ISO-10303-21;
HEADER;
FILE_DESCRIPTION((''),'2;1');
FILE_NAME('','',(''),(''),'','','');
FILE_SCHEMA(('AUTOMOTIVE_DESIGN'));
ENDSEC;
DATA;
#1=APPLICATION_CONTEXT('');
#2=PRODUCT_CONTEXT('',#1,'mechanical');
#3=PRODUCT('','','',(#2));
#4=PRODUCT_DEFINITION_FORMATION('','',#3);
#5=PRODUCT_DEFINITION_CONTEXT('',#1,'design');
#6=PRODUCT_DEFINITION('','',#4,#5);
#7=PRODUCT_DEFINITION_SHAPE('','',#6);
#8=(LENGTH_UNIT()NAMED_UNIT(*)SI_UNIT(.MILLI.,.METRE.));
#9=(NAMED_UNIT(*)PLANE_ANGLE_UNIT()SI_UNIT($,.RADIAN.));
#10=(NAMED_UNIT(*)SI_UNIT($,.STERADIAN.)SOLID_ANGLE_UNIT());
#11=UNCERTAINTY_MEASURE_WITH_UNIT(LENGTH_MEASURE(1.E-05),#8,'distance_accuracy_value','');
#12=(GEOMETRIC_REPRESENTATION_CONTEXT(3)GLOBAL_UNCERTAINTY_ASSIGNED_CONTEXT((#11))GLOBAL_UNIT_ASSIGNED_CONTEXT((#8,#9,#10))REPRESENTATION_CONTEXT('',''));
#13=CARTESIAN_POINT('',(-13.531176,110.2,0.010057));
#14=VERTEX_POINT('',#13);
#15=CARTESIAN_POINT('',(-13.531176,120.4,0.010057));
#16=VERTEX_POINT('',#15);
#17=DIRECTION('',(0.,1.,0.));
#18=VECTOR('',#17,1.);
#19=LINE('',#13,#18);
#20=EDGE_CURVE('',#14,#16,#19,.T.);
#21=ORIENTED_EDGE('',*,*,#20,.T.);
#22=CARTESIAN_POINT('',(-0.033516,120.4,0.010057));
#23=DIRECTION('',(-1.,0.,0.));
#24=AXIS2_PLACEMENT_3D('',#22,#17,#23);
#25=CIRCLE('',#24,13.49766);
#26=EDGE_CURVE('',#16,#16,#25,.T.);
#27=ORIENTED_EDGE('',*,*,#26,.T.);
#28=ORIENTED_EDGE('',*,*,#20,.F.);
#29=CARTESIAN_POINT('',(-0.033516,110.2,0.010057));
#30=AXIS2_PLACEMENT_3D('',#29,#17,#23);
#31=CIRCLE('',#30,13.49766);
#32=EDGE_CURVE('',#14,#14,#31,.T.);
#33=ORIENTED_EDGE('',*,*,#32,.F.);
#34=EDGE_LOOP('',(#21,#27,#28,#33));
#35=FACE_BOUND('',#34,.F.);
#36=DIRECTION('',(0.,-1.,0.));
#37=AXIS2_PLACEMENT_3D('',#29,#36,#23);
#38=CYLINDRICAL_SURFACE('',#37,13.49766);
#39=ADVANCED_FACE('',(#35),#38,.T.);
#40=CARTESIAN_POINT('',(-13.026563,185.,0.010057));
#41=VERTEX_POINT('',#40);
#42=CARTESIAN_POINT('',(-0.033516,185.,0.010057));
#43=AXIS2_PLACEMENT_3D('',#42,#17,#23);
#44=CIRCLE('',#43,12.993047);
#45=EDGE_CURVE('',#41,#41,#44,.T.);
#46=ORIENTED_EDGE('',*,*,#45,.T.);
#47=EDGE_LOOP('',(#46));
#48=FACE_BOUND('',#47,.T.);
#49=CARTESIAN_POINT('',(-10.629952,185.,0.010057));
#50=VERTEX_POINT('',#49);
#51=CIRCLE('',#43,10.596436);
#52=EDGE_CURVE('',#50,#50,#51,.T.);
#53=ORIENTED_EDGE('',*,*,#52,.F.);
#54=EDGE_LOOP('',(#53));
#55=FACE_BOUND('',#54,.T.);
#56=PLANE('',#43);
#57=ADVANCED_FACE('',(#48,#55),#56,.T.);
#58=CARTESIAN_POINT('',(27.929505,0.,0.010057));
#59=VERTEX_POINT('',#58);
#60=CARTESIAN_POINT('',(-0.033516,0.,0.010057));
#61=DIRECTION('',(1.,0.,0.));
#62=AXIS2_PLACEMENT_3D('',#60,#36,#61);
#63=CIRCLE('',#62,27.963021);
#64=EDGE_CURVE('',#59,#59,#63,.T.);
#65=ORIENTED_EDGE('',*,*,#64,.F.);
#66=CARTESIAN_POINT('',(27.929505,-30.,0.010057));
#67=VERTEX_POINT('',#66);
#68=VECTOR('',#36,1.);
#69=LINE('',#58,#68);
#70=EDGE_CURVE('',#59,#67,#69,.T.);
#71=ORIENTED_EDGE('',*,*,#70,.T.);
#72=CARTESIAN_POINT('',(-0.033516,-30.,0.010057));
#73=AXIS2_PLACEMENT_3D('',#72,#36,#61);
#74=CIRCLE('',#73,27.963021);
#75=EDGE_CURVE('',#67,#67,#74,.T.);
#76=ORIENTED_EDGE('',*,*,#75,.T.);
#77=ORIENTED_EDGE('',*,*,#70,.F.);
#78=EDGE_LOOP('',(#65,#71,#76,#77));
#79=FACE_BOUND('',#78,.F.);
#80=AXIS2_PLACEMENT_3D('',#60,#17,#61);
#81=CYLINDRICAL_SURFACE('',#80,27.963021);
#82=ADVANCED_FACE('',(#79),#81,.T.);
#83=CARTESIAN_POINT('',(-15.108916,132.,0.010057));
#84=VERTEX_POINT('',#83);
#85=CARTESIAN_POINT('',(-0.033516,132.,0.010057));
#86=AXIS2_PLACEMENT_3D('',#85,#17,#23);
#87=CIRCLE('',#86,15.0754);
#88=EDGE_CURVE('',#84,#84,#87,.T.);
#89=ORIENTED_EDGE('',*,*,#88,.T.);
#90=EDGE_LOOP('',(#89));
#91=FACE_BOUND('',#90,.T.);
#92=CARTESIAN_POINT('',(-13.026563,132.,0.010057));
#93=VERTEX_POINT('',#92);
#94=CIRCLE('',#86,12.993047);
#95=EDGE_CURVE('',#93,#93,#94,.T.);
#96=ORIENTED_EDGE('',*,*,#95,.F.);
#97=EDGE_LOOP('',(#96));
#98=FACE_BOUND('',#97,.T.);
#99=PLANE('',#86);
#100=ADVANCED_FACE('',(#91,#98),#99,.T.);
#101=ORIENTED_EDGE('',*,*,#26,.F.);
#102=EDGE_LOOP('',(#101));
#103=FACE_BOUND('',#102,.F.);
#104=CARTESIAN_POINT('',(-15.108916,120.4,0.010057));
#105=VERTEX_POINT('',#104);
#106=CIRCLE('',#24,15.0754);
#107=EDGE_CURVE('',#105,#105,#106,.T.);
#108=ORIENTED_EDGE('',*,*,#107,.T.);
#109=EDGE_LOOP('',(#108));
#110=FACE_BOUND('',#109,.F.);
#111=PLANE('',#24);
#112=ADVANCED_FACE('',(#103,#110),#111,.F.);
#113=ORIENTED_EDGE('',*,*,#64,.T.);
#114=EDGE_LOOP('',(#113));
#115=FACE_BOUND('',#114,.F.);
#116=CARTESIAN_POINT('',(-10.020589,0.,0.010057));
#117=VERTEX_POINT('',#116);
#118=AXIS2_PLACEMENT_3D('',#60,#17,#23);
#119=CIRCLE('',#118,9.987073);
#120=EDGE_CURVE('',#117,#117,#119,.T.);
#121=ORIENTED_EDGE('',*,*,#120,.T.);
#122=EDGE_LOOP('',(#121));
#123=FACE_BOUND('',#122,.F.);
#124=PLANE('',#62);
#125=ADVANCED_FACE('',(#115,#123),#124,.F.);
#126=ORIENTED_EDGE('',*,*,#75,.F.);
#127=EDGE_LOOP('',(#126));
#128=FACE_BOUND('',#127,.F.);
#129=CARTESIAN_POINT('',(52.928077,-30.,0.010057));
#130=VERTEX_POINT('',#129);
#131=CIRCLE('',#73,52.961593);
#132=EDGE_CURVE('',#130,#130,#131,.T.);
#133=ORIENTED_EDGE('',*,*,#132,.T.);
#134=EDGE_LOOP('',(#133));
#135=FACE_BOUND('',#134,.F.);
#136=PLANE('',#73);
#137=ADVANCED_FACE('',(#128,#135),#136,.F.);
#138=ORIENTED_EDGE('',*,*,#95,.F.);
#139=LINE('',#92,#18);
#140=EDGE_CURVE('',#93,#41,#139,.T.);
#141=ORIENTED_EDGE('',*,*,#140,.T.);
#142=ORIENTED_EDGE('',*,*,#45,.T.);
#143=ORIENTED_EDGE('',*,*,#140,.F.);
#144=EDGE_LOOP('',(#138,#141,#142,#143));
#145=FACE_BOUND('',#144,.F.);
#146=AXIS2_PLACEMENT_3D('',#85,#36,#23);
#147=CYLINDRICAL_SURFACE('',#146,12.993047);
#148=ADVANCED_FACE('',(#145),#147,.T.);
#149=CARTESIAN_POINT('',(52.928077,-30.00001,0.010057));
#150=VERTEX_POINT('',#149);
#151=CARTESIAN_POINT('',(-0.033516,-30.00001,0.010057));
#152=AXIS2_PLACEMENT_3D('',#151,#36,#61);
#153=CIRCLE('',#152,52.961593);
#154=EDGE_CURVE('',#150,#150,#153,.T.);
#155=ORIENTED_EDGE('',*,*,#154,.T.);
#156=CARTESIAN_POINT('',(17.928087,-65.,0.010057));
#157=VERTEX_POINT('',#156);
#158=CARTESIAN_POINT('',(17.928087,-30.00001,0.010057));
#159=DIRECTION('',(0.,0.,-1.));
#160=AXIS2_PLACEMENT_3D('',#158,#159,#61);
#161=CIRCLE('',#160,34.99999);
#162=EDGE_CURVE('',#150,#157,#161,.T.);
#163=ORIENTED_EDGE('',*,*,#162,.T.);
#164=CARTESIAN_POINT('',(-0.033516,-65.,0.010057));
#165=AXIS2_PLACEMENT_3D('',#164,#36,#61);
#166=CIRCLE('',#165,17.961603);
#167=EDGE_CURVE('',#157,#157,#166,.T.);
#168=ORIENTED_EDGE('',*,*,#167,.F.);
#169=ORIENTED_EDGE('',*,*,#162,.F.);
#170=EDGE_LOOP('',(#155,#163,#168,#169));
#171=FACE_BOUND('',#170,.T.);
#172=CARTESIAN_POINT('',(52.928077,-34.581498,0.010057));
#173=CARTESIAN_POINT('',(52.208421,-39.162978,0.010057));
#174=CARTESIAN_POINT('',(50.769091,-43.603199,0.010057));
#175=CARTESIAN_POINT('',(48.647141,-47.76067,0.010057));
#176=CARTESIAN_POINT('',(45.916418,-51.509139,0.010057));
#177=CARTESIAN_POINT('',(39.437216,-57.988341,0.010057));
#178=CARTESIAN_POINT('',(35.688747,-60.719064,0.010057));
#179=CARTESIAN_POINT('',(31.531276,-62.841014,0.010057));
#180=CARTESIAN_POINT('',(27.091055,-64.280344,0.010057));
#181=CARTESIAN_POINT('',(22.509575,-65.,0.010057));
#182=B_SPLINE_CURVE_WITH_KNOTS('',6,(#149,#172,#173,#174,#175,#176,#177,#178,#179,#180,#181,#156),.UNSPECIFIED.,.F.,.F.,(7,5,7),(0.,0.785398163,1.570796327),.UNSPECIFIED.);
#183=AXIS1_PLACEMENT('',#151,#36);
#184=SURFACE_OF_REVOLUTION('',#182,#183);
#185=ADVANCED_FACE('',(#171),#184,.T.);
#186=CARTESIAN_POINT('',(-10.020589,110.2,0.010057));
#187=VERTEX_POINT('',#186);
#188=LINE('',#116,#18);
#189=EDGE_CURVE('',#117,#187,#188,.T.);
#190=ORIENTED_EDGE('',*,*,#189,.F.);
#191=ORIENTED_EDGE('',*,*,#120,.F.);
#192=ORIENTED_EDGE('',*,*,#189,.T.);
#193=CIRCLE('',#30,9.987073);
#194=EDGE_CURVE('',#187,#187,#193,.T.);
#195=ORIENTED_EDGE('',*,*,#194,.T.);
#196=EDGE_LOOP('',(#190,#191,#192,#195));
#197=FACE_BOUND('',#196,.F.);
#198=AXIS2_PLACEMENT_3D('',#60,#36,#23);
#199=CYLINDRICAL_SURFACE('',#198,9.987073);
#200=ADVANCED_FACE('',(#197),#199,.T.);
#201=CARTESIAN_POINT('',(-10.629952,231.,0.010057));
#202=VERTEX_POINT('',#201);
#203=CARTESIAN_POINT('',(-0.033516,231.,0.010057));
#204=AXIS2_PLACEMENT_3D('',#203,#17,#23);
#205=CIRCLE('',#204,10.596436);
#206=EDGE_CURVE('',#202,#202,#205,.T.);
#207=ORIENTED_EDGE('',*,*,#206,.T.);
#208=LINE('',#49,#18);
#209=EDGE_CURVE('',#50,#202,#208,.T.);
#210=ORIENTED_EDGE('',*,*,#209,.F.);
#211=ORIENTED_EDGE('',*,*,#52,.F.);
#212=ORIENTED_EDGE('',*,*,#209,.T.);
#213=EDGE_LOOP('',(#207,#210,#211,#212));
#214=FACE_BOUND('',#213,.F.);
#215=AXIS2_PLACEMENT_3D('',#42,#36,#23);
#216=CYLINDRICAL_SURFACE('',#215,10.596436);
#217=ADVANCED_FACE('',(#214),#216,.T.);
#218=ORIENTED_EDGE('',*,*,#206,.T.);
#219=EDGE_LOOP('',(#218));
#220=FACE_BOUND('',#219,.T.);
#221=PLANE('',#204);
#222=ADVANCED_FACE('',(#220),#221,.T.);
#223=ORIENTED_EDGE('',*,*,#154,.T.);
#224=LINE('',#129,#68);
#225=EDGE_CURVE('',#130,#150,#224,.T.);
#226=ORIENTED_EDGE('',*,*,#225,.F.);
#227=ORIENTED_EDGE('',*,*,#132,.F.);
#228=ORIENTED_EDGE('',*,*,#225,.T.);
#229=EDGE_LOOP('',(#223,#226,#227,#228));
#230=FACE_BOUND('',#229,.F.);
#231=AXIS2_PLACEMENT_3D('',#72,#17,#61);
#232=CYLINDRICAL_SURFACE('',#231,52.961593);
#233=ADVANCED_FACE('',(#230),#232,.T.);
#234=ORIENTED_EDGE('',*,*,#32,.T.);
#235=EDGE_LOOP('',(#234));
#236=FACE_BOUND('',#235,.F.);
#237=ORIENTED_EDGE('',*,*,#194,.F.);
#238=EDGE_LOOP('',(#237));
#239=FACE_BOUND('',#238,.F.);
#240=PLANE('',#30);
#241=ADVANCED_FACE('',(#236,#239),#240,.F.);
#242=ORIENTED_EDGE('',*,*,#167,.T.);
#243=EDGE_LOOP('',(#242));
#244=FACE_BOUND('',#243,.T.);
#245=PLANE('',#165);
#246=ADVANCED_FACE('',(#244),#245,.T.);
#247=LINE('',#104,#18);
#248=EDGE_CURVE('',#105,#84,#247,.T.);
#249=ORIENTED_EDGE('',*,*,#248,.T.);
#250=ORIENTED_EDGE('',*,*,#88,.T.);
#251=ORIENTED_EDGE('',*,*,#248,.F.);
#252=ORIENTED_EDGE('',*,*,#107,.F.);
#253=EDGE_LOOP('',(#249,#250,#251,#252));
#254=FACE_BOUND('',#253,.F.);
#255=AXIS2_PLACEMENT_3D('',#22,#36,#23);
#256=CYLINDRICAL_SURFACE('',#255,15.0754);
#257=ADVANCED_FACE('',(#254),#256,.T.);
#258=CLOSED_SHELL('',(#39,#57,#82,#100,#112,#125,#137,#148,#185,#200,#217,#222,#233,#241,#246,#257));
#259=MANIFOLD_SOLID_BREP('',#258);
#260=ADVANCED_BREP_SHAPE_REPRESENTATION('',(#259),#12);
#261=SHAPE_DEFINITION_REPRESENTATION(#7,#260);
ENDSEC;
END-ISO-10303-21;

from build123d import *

# Parameters (mm, degrees)
F0_R      = 27.9630212455
F1_DEPTH  = 30
F2_R      = 52.9615929448
F2_R_2    = 27.9630212455
F3_DEPTH  = 35
F4_R      = 34.99999
F5_R      = 9.9870725783
F6_DEPTH  = 110.2
F7_R      = 13.4976595802
F7_R_2    = 9.9870725783
F8_DEPTH  = 10.2
F9_R      = 15.0753999454
F9_R_2    = 13.4976595802
F10_DEPTH = 11.6
F11_R     = 12.993046765
F12_DEPTH = 53
F13_R     = 10.5964364109
F14_DEPTH = 46


# Not quite as in the source:
# - a fillet or chamfer is up to 0.001 mm smaller than in the source, because OpenCascade refuses the exact size


with BuildPart() as f1:
    # F0 (on Front) → F1 (new body)
    with BuildSketch(Plane.XZ):
        with Locations((-0.0335160657, 0.0100570778)):
            Circle(F0_R)
    extrude(amount=F1_DEPTH)

    # F2 (on face) → F3 (join)
    with BuildSketch(Plane.XZ.offset(30)):
        with Locations((-0.0335160657, 0.0100570778)):
            Circle(F2_R)
        with Locations((-0.0335160657, 0.0100570778)):
            Circle(F2_R_2, mode=Mode.SUBTRACT)
        with Locations((-0.0335160657, 0.0100570778)):
            Circle(F2_R_2)
    extrude(amount=F3_DEPTH)

    # F4 (radius 35 in the source; OpenCascade refuses exactly that, so slightly less here)
    f4_edges = [f1.edges().sort_by_distance(p)[0] for p in [
        (-52.995109, -65, 0.010057),
    ]]
    fillet(f4_edges, radius=F4_R)

    # F5 (on face) → F6 (join)
    with BuildSketch(Plane(origin=(0, 0, 0), x_dir=(-1, 0, 0), z_dir=(0, 1, 0))):
        with Locations((0.0335160657, 0.0100570778)):
            Circle(F5_R)
    extrude(amount=F6_DEPTH)

    # F7 (on face) → F8 (join)
    with BuildSketch(Plane(origin=(0, 110.2, 0), x_dir=(-1, 0, 0), z_dir=(0, 1, 0))):
        with Locations((0.0335160657, 0.0100570778)):
            Circle(F7_R)
        with Locations((0.0335160657, 0.0100570778)):
            Circle(F7_R_2, mode=Mode.SUBTRACT)
        with Locations((0.0335160657, 0.0100570778)):
            Circle(F7_R_2)
    extrude(amount=F8_DEPTH)

    # F9 (on face) → F10 (join)
    with BuildSketch(Plane(origin=(0, 120.4, 0), x_dir=(-1, 0, 0), z_dir=(0, 1, 0))):
        with Locations((0.0335160657, 0.0100570778)):
            Circle(F9_R)
        with Locations((0.0335160657, 0.0100570778)):
            Circle(F9_R_2, mode=Mode.SUBTRACT)
        with Locations((0.0335160657, 0.0100570778)):
            Circle(F9_R_2)
    extrude(amount=F10_DEPTH)

    # F11 (on face) → F12 (join)
    with BuildSketch(Plane(origin=(0, 132, 0), x_dir=(-1, 0, 0), z_dir=(0, 1, 0))):
        with Locations((0.0335160657, 0.0100570778)):
            Circle(F11_R)
    extrude(amount=F12_DEPTH)

    # F13 (on face) → F14 (join)
    with BuildSketch(Plane(origin=(0, 185, 0), x_dir=(-1, 0, 0), z_dir=(0, 1, 0))):
        with Locations((0.0335160657, 0.0100570778)):
            Circle(F13_R)
    extrude(amount=F14_DEPTH)


solid = f1.part
